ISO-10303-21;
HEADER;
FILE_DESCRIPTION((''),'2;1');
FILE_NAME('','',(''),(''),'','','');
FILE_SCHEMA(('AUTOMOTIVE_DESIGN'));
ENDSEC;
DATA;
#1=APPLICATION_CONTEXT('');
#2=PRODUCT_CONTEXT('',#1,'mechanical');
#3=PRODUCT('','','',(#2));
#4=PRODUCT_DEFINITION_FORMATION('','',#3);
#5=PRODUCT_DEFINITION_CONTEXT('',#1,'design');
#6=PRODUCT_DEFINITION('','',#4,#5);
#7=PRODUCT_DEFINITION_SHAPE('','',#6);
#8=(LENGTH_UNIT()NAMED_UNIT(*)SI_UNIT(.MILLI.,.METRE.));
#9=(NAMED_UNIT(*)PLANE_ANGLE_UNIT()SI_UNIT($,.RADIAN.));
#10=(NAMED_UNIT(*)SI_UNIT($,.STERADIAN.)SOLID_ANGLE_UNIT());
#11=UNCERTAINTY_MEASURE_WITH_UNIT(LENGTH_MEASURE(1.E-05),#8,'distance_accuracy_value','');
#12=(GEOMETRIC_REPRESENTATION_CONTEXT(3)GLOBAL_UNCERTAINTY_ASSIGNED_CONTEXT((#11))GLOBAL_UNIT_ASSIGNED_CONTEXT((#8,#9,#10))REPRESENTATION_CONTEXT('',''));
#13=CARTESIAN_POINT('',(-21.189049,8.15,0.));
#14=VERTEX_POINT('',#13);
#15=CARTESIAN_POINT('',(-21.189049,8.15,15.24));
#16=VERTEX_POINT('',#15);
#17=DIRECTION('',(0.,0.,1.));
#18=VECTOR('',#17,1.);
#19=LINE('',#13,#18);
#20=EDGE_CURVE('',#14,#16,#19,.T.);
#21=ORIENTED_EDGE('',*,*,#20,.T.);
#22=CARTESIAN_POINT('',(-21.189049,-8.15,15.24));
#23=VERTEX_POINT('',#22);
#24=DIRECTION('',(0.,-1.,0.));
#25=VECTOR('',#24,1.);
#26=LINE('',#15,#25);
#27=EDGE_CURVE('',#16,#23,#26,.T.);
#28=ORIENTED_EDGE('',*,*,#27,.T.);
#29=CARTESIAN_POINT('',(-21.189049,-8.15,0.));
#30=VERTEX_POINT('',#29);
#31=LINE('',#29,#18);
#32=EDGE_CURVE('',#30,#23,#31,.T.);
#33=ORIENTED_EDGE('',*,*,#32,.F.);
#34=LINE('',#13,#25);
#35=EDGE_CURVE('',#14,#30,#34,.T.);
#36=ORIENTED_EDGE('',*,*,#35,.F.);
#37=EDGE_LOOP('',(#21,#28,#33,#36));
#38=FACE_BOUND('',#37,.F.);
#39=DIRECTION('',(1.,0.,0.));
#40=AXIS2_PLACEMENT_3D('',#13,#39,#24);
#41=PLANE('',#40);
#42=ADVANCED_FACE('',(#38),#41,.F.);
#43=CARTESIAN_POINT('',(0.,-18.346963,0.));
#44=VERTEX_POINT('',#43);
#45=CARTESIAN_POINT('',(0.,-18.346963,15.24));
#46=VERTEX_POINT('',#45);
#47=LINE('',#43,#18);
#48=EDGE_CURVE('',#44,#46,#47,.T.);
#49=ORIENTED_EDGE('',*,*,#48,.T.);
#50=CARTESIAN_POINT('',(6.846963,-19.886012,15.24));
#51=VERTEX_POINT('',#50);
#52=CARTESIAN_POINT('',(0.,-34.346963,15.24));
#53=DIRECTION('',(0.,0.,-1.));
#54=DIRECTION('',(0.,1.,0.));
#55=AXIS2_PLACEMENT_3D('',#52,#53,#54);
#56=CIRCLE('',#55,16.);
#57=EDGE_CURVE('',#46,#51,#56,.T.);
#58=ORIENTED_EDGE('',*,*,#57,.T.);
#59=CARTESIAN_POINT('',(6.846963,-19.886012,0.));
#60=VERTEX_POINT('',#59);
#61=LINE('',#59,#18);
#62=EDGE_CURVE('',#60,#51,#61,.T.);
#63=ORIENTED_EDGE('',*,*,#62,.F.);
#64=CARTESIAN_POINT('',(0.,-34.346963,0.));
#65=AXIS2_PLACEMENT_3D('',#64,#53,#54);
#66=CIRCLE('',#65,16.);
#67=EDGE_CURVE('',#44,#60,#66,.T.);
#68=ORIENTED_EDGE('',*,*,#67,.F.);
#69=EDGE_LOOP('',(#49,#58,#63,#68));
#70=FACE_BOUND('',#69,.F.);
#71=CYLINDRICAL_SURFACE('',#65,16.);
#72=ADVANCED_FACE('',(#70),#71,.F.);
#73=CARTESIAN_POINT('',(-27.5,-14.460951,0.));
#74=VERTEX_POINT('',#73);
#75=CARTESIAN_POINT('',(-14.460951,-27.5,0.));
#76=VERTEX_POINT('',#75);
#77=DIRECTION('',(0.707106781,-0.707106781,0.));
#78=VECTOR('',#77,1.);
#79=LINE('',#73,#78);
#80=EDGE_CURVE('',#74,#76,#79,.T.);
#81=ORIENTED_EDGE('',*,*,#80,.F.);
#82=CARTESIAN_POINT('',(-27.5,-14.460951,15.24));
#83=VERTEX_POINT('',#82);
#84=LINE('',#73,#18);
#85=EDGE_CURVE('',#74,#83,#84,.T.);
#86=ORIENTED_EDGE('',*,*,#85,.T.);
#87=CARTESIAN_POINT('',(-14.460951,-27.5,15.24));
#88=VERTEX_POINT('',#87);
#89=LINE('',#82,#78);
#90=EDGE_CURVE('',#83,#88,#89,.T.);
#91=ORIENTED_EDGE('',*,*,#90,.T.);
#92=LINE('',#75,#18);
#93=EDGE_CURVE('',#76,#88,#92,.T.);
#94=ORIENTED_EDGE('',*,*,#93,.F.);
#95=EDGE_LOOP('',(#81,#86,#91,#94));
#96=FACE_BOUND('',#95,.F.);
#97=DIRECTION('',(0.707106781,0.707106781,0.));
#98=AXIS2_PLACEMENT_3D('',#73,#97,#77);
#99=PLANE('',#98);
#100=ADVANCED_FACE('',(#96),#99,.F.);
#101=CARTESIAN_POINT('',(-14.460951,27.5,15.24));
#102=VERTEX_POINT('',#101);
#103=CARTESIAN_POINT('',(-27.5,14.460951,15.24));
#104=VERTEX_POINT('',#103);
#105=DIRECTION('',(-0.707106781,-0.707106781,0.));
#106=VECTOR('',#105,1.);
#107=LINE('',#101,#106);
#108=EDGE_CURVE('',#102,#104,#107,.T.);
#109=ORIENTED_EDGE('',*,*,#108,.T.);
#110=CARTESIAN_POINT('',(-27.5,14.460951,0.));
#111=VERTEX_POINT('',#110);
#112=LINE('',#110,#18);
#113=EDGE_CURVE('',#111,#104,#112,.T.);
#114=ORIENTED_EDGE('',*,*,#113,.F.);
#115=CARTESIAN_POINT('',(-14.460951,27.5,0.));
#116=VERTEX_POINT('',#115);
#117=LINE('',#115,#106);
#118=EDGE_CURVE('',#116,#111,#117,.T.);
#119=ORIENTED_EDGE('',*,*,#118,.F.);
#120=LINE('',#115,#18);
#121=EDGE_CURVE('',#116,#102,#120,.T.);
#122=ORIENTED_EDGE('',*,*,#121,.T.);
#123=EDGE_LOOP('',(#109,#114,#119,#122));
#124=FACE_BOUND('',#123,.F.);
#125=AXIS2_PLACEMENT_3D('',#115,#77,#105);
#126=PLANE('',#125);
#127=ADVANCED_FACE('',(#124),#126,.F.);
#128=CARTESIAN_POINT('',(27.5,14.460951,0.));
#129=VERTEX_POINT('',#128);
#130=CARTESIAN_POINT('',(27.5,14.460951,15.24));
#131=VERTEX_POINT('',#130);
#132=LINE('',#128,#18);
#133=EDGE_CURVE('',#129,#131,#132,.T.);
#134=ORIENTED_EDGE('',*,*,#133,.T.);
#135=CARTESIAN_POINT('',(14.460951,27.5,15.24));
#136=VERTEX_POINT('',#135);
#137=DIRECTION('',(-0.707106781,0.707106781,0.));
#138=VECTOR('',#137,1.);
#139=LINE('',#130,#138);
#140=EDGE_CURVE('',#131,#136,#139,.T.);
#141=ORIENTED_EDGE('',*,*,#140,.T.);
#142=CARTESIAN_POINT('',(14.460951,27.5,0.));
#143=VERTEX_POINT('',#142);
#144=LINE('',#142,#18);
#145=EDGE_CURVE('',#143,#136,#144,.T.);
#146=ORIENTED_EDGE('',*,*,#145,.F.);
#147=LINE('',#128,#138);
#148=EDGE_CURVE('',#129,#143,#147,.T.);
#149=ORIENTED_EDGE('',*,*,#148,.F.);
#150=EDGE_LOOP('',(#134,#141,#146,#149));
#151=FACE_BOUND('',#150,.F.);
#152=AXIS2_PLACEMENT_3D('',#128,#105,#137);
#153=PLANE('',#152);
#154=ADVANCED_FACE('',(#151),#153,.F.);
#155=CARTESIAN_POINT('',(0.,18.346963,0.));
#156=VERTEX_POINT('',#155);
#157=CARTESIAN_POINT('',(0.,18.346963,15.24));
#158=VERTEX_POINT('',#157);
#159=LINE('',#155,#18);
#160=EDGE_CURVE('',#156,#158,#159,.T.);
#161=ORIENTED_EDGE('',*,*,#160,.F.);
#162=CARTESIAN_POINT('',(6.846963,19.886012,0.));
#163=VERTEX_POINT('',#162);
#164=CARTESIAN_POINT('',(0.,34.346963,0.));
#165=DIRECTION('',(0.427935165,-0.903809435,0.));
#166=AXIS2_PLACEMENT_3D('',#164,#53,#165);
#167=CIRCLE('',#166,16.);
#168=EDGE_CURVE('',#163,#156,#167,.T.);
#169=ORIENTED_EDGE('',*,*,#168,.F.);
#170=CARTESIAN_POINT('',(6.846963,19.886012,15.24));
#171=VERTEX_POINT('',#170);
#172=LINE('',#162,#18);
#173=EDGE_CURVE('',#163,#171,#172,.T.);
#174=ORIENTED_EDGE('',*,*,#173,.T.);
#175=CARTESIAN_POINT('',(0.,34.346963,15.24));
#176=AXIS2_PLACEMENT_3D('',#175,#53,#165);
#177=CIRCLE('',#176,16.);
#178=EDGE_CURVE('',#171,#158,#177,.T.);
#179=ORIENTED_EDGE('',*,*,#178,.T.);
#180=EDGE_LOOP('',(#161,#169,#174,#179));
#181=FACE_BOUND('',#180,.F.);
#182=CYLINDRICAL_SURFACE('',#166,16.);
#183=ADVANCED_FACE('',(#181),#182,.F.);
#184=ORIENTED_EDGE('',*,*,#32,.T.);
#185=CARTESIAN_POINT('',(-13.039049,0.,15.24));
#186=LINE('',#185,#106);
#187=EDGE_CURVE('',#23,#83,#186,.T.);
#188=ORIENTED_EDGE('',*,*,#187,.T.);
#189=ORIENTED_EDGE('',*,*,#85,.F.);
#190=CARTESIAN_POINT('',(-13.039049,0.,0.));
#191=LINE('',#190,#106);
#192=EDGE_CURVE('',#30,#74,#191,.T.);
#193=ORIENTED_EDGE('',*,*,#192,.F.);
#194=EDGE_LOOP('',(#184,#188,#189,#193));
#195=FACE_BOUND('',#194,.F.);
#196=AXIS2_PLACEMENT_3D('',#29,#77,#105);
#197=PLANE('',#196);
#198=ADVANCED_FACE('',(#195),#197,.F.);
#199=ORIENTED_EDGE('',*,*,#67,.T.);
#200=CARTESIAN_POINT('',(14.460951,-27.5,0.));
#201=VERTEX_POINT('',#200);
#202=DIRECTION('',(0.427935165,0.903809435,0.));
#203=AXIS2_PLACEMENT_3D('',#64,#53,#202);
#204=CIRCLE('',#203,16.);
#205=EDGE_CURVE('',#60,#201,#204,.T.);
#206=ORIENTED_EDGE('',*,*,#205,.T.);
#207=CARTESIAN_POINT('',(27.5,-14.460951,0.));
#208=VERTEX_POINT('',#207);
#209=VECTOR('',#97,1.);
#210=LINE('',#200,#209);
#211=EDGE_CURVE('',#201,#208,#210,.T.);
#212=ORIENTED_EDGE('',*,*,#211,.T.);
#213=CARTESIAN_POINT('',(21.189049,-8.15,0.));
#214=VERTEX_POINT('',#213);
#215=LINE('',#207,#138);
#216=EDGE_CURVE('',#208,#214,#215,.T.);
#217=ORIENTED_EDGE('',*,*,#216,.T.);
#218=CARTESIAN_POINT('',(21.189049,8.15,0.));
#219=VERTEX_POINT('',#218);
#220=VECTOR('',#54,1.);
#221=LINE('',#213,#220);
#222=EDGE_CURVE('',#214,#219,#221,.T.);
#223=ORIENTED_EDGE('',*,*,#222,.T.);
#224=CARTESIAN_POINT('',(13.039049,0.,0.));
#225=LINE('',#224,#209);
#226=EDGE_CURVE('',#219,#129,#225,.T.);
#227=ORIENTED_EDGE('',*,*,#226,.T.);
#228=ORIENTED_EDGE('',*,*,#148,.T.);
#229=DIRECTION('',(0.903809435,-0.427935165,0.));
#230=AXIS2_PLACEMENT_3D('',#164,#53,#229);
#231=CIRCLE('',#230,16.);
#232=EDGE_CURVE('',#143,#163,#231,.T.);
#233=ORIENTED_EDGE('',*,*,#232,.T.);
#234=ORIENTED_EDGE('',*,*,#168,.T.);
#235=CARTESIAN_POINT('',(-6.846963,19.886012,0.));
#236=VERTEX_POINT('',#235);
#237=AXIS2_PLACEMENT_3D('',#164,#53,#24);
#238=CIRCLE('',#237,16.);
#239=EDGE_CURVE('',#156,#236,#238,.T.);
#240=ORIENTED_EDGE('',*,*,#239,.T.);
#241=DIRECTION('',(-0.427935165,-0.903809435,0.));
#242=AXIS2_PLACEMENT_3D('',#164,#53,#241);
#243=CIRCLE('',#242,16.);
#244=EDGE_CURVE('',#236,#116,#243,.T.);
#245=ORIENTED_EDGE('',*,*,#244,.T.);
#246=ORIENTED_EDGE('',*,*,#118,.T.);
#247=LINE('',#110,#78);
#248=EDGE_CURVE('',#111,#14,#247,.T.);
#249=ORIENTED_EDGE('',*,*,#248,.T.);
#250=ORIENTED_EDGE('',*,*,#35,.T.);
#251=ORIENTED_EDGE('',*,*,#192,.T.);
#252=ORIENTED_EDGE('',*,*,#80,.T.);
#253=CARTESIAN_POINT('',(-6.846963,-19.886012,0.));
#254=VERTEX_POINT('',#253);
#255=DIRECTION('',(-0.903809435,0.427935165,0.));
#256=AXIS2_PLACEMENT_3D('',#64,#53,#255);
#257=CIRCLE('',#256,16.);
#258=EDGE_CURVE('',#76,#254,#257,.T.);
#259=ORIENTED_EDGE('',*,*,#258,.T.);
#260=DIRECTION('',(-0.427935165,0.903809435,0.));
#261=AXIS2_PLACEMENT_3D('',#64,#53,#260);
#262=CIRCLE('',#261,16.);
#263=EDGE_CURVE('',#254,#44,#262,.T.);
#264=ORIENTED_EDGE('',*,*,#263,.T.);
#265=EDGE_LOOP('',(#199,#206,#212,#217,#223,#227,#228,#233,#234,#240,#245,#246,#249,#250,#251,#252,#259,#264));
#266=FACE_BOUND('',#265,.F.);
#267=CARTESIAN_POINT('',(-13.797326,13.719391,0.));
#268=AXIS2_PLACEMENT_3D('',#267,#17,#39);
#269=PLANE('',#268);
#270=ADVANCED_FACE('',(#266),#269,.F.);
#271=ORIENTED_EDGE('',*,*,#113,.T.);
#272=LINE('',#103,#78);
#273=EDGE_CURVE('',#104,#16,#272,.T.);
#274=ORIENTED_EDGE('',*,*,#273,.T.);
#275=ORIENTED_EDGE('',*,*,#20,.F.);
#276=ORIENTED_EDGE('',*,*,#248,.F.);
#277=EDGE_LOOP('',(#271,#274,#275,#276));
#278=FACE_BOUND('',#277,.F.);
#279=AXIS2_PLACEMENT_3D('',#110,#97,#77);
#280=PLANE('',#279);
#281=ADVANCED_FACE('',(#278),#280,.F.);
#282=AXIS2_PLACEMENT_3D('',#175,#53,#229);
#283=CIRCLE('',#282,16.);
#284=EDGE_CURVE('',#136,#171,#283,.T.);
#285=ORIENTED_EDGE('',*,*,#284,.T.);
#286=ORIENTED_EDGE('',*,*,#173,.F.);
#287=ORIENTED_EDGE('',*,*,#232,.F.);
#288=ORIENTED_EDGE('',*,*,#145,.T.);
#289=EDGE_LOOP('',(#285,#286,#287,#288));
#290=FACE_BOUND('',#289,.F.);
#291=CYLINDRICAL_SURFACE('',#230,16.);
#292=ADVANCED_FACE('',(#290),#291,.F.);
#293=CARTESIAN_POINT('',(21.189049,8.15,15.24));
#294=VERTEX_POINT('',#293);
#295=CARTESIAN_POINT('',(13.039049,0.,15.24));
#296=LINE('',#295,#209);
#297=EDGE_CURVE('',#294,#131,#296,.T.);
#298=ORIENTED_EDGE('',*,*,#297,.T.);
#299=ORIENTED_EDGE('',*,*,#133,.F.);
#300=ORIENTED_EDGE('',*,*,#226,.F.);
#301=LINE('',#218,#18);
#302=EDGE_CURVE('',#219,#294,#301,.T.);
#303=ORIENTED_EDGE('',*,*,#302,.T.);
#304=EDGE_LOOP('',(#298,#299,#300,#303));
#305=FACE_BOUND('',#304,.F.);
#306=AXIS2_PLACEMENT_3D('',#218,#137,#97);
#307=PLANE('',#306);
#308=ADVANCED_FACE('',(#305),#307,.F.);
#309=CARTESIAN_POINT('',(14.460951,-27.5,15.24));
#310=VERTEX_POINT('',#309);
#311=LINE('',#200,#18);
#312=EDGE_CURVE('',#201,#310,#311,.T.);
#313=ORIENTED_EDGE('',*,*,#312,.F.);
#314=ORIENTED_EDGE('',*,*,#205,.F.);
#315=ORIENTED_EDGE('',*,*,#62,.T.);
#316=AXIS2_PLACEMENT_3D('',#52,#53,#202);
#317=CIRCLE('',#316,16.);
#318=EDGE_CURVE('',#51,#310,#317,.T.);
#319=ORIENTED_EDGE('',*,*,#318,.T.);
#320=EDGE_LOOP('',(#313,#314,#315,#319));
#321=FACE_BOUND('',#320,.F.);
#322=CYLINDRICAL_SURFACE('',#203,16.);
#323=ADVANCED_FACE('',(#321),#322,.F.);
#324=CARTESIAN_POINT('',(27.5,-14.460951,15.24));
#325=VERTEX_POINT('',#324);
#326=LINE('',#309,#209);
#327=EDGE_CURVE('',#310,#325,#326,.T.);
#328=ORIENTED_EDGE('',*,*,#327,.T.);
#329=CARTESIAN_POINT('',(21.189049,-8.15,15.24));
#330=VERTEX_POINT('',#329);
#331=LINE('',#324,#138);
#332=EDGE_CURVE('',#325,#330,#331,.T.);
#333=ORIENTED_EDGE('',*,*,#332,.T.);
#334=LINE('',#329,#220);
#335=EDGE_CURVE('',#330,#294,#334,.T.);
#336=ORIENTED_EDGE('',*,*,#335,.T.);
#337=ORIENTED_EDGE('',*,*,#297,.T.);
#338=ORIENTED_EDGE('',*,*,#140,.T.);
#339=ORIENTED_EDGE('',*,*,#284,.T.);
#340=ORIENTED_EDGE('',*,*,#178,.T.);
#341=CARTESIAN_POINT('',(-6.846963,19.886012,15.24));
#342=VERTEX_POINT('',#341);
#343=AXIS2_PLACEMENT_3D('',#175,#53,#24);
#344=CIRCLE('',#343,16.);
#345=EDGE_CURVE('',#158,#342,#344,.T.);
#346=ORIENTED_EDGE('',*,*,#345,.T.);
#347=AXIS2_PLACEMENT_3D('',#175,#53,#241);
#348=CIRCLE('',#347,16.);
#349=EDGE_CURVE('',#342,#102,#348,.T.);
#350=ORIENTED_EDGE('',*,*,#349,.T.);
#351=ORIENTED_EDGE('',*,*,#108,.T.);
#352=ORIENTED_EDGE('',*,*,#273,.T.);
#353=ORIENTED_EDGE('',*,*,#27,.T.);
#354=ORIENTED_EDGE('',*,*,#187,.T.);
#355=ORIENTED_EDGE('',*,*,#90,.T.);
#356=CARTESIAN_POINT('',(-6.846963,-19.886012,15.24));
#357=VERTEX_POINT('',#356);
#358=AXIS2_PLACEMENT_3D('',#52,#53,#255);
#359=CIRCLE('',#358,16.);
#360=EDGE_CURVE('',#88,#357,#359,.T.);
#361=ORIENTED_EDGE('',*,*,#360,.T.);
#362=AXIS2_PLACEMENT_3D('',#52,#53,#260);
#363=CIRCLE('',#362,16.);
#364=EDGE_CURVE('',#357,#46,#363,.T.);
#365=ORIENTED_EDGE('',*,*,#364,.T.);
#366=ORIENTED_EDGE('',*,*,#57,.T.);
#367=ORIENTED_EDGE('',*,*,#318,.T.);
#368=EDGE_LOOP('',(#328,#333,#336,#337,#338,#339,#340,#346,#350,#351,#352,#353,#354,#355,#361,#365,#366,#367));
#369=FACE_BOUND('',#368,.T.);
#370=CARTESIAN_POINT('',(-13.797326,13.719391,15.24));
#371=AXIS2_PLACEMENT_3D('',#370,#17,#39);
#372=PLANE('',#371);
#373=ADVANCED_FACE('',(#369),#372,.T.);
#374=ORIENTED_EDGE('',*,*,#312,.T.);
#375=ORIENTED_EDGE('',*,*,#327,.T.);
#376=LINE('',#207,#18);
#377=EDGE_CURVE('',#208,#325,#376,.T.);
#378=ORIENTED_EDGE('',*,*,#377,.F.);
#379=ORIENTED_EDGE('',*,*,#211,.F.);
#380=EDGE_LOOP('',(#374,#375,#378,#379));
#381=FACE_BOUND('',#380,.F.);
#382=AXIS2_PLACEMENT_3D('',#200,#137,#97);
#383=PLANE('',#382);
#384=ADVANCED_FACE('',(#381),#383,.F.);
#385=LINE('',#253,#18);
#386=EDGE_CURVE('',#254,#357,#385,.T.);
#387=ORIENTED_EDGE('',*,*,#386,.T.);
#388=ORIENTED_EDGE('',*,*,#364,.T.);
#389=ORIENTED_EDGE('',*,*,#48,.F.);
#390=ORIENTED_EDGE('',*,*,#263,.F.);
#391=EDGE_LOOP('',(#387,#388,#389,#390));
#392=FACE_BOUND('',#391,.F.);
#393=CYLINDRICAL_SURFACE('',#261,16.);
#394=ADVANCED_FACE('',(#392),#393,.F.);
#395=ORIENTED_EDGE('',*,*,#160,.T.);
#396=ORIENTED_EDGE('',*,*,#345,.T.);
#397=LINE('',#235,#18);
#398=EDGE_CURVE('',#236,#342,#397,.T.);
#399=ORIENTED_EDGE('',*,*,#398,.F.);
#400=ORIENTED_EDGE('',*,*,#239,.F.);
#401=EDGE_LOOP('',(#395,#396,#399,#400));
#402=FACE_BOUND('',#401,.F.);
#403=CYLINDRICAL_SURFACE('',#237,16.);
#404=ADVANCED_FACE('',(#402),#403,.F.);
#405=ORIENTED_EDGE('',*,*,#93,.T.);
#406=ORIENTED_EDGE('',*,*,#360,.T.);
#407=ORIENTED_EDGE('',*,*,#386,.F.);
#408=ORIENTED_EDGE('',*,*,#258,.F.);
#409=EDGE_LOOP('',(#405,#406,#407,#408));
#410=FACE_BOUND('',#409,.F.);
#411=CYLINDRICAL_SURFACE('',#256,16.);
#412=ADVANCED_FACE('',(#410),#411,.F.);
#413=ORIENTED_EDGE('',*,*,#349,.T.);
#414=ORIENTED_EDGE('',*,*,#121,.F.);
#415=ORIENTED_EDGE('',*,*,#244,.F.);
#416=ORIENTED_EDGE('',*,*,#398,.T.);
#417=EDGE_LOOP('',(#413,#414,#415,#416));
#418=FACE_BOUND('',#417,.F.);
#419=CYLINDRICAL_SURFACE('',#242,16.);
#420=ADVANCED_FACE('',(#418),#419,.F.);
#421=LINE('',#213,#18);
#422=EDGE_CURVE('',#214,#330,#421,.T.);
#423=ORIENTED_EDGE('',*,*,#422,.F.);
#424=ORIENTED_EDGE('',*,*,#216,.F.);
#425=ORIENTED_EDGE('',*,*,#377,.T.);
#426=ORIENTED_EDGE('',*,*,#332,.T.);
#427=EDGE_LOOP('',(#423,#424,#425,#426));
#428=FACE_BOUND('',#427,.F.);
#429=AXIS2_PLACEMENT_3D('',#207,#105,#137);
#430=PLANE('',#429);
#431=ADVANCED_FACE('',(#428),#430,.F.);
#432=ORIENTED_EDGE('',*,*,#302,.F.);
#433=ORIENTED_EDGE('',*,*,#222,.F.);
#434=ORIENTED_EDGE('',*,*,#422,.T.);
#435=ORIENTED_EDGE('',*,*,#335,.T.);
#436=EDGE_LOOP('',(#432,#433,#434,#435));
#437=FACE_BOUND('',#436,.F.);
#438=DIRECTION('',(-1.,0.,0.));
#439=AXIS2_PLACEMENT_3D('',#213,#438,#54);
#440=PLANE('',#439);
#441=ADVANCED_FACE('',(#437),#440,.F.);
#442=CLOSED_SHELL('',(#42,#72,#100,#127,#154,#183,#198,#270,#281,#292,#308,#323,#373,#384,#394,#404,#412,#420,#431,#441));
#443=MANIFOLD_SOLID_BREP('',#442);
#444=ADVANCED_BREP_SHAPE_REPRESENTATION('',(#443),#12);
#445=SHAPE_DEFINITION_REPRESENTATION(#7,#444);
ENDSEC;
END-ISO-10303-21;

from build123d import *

# Parameters (mm, degrees)
F1_DEPTH = 15.24


# Not quite as in the source:
# - a feature names something its author has since deleted; it is built from what else it names


with BuildPart() as f1:
    # F0 (on Top) → F1 (new body)
    with BuildSketch(Plane.XY):
        with BuildLine():
            ThreePointArc((-6.8469626463, 19.8860116913), (-11.313708499, 23.0332541473), (-14.4609509549, 27.5))
            Line((-14.4609509549, 27.5), (-27.5, 14.4609509549))
            Line((-27.5, 14.4609509549), (-21.1890490451, 8.15))
            Line((-21.1890490451, 8.15), (-13.0390490451, 0))
            Line((-13.0390490451, 0), (0, 13.0390490451))
            Line((0, 13.0390490451), (-6.8469626463, 19.8860116913))
        make_face()
        Polygon((-13.0390490451, 0), (-21.1890490451, 8.15), (-21.1890490451, -8.15), align=None)
        with BuildLine():
            Line((14.4609509549, -27.5), (27.5, -14.4609509549))
            Line((27.5, -14.4609509549), (21.1890490451, -8.15))
            Line((21.1890490451, -8.15), (13.0390490451, 0))
            Line((13.0390490451, 0), (0, -13.0390490451))
            Line((0, -13.0390490451), (6.8469626463, -19.8860116913))
            ThreePointArc((6.8469626463, -19.8860116913), (11.313708499, -23.0332541473), (14.4609509549, -27.5))
        make_face()
        Polygon((13.0390490451, 0), (0, 13.0390490451), (0, 0), (0, -13.0390490451), align=None)
        Polygon((0, 0), (0, 13.0390490451), (-13.0390490451, 0), (0, -13.0390490451), align=None)
        with BuildLine():
            Line((27.5, 14.4609509549), (14.4609509549, 27.5))
            ThreePointArc((14.4609509549, 27.5), (11.313708499, 23.0332541473), (6.8469626463, 19.8860116913))
            Line((6.8469626463, 19.8860116913), (0, 13.0390490451))
            Line((0, 13.0390490451), (13.0390490451, 0))
            Line((13.0390490451, 0), (21.1890490451, 8.15))
            Line((21.1890490451, 8.15), (27.5, 14.4609509549))
        make_face()
        Polygon((21.1890490451, -8.15), (21.1890490451, 8.15), (13.0390490451, 0), align=None)
        with BuildLine():
            Line((0, -13.0390490451), (-6.8469626463, -19.8860116913))
            ThreePointArc((-6.8469626463, -19.8860116913), (-3.5089018739, -18.7364659329), (0, -18.3469626463))
            Line((0, -18.3469626463), (0, -13.0390490451))
        make_face()
        with BuildLine():
            Line((0, 13.0390490451), (6.8469626463, 19.8860116913))
            ThreePointArc((6.8469626463, 19.8860116913), (3.5089018739, 18.7364659329), (0, 18.3469626463))
            Line((0, 18.3469626463), (0, 13.0390490451))
        make_face()
        with BuildLine():
            ThreePointArc((0, 18.3469626463), (-3.5089018739, 18.7364659329), (-6.8469626463, 19.8860116913))
            Line((-6.8469626463, 19.8860116913), (0, 13.0390490451))
            Line((0, 13.0390490451), (0, 18.3469626463))
        make_face()
        with BuildLine():
            Line((6.8469626463, -19.8860116913), (0, -13.0390490451))
            Line((0, -13.0390490451), (0, -18.3469626463))
            ThreePointArc((0, -18.3469626463), (3.5089018739, -18.7364659329), (6.8469626463, -19.8860116913))
        make_face()
        with BuildLine():
            Line((-21.1890490451, -8.15), (-27.5, -14.4609509549))
            Line((-27.5, -14.4609509549), (-14.4609509549, -27.5))
            ThreePointArc((-14.4609509549, -27.5), (-11.313708499, -23.0332541473), (-6.8469626463, -19.8860116913))
            Line((-6.8469626463, -19.8860116913), (0, -13.0390490451))
            Line((0, -13.0390490451), (-13.0390490451, 0))
            Line((-13.0390490451, 0), (-21.1890490451, -8.15))
        make_face()
    extrude(amount=F1_DEPTH)


solid = f1.part
